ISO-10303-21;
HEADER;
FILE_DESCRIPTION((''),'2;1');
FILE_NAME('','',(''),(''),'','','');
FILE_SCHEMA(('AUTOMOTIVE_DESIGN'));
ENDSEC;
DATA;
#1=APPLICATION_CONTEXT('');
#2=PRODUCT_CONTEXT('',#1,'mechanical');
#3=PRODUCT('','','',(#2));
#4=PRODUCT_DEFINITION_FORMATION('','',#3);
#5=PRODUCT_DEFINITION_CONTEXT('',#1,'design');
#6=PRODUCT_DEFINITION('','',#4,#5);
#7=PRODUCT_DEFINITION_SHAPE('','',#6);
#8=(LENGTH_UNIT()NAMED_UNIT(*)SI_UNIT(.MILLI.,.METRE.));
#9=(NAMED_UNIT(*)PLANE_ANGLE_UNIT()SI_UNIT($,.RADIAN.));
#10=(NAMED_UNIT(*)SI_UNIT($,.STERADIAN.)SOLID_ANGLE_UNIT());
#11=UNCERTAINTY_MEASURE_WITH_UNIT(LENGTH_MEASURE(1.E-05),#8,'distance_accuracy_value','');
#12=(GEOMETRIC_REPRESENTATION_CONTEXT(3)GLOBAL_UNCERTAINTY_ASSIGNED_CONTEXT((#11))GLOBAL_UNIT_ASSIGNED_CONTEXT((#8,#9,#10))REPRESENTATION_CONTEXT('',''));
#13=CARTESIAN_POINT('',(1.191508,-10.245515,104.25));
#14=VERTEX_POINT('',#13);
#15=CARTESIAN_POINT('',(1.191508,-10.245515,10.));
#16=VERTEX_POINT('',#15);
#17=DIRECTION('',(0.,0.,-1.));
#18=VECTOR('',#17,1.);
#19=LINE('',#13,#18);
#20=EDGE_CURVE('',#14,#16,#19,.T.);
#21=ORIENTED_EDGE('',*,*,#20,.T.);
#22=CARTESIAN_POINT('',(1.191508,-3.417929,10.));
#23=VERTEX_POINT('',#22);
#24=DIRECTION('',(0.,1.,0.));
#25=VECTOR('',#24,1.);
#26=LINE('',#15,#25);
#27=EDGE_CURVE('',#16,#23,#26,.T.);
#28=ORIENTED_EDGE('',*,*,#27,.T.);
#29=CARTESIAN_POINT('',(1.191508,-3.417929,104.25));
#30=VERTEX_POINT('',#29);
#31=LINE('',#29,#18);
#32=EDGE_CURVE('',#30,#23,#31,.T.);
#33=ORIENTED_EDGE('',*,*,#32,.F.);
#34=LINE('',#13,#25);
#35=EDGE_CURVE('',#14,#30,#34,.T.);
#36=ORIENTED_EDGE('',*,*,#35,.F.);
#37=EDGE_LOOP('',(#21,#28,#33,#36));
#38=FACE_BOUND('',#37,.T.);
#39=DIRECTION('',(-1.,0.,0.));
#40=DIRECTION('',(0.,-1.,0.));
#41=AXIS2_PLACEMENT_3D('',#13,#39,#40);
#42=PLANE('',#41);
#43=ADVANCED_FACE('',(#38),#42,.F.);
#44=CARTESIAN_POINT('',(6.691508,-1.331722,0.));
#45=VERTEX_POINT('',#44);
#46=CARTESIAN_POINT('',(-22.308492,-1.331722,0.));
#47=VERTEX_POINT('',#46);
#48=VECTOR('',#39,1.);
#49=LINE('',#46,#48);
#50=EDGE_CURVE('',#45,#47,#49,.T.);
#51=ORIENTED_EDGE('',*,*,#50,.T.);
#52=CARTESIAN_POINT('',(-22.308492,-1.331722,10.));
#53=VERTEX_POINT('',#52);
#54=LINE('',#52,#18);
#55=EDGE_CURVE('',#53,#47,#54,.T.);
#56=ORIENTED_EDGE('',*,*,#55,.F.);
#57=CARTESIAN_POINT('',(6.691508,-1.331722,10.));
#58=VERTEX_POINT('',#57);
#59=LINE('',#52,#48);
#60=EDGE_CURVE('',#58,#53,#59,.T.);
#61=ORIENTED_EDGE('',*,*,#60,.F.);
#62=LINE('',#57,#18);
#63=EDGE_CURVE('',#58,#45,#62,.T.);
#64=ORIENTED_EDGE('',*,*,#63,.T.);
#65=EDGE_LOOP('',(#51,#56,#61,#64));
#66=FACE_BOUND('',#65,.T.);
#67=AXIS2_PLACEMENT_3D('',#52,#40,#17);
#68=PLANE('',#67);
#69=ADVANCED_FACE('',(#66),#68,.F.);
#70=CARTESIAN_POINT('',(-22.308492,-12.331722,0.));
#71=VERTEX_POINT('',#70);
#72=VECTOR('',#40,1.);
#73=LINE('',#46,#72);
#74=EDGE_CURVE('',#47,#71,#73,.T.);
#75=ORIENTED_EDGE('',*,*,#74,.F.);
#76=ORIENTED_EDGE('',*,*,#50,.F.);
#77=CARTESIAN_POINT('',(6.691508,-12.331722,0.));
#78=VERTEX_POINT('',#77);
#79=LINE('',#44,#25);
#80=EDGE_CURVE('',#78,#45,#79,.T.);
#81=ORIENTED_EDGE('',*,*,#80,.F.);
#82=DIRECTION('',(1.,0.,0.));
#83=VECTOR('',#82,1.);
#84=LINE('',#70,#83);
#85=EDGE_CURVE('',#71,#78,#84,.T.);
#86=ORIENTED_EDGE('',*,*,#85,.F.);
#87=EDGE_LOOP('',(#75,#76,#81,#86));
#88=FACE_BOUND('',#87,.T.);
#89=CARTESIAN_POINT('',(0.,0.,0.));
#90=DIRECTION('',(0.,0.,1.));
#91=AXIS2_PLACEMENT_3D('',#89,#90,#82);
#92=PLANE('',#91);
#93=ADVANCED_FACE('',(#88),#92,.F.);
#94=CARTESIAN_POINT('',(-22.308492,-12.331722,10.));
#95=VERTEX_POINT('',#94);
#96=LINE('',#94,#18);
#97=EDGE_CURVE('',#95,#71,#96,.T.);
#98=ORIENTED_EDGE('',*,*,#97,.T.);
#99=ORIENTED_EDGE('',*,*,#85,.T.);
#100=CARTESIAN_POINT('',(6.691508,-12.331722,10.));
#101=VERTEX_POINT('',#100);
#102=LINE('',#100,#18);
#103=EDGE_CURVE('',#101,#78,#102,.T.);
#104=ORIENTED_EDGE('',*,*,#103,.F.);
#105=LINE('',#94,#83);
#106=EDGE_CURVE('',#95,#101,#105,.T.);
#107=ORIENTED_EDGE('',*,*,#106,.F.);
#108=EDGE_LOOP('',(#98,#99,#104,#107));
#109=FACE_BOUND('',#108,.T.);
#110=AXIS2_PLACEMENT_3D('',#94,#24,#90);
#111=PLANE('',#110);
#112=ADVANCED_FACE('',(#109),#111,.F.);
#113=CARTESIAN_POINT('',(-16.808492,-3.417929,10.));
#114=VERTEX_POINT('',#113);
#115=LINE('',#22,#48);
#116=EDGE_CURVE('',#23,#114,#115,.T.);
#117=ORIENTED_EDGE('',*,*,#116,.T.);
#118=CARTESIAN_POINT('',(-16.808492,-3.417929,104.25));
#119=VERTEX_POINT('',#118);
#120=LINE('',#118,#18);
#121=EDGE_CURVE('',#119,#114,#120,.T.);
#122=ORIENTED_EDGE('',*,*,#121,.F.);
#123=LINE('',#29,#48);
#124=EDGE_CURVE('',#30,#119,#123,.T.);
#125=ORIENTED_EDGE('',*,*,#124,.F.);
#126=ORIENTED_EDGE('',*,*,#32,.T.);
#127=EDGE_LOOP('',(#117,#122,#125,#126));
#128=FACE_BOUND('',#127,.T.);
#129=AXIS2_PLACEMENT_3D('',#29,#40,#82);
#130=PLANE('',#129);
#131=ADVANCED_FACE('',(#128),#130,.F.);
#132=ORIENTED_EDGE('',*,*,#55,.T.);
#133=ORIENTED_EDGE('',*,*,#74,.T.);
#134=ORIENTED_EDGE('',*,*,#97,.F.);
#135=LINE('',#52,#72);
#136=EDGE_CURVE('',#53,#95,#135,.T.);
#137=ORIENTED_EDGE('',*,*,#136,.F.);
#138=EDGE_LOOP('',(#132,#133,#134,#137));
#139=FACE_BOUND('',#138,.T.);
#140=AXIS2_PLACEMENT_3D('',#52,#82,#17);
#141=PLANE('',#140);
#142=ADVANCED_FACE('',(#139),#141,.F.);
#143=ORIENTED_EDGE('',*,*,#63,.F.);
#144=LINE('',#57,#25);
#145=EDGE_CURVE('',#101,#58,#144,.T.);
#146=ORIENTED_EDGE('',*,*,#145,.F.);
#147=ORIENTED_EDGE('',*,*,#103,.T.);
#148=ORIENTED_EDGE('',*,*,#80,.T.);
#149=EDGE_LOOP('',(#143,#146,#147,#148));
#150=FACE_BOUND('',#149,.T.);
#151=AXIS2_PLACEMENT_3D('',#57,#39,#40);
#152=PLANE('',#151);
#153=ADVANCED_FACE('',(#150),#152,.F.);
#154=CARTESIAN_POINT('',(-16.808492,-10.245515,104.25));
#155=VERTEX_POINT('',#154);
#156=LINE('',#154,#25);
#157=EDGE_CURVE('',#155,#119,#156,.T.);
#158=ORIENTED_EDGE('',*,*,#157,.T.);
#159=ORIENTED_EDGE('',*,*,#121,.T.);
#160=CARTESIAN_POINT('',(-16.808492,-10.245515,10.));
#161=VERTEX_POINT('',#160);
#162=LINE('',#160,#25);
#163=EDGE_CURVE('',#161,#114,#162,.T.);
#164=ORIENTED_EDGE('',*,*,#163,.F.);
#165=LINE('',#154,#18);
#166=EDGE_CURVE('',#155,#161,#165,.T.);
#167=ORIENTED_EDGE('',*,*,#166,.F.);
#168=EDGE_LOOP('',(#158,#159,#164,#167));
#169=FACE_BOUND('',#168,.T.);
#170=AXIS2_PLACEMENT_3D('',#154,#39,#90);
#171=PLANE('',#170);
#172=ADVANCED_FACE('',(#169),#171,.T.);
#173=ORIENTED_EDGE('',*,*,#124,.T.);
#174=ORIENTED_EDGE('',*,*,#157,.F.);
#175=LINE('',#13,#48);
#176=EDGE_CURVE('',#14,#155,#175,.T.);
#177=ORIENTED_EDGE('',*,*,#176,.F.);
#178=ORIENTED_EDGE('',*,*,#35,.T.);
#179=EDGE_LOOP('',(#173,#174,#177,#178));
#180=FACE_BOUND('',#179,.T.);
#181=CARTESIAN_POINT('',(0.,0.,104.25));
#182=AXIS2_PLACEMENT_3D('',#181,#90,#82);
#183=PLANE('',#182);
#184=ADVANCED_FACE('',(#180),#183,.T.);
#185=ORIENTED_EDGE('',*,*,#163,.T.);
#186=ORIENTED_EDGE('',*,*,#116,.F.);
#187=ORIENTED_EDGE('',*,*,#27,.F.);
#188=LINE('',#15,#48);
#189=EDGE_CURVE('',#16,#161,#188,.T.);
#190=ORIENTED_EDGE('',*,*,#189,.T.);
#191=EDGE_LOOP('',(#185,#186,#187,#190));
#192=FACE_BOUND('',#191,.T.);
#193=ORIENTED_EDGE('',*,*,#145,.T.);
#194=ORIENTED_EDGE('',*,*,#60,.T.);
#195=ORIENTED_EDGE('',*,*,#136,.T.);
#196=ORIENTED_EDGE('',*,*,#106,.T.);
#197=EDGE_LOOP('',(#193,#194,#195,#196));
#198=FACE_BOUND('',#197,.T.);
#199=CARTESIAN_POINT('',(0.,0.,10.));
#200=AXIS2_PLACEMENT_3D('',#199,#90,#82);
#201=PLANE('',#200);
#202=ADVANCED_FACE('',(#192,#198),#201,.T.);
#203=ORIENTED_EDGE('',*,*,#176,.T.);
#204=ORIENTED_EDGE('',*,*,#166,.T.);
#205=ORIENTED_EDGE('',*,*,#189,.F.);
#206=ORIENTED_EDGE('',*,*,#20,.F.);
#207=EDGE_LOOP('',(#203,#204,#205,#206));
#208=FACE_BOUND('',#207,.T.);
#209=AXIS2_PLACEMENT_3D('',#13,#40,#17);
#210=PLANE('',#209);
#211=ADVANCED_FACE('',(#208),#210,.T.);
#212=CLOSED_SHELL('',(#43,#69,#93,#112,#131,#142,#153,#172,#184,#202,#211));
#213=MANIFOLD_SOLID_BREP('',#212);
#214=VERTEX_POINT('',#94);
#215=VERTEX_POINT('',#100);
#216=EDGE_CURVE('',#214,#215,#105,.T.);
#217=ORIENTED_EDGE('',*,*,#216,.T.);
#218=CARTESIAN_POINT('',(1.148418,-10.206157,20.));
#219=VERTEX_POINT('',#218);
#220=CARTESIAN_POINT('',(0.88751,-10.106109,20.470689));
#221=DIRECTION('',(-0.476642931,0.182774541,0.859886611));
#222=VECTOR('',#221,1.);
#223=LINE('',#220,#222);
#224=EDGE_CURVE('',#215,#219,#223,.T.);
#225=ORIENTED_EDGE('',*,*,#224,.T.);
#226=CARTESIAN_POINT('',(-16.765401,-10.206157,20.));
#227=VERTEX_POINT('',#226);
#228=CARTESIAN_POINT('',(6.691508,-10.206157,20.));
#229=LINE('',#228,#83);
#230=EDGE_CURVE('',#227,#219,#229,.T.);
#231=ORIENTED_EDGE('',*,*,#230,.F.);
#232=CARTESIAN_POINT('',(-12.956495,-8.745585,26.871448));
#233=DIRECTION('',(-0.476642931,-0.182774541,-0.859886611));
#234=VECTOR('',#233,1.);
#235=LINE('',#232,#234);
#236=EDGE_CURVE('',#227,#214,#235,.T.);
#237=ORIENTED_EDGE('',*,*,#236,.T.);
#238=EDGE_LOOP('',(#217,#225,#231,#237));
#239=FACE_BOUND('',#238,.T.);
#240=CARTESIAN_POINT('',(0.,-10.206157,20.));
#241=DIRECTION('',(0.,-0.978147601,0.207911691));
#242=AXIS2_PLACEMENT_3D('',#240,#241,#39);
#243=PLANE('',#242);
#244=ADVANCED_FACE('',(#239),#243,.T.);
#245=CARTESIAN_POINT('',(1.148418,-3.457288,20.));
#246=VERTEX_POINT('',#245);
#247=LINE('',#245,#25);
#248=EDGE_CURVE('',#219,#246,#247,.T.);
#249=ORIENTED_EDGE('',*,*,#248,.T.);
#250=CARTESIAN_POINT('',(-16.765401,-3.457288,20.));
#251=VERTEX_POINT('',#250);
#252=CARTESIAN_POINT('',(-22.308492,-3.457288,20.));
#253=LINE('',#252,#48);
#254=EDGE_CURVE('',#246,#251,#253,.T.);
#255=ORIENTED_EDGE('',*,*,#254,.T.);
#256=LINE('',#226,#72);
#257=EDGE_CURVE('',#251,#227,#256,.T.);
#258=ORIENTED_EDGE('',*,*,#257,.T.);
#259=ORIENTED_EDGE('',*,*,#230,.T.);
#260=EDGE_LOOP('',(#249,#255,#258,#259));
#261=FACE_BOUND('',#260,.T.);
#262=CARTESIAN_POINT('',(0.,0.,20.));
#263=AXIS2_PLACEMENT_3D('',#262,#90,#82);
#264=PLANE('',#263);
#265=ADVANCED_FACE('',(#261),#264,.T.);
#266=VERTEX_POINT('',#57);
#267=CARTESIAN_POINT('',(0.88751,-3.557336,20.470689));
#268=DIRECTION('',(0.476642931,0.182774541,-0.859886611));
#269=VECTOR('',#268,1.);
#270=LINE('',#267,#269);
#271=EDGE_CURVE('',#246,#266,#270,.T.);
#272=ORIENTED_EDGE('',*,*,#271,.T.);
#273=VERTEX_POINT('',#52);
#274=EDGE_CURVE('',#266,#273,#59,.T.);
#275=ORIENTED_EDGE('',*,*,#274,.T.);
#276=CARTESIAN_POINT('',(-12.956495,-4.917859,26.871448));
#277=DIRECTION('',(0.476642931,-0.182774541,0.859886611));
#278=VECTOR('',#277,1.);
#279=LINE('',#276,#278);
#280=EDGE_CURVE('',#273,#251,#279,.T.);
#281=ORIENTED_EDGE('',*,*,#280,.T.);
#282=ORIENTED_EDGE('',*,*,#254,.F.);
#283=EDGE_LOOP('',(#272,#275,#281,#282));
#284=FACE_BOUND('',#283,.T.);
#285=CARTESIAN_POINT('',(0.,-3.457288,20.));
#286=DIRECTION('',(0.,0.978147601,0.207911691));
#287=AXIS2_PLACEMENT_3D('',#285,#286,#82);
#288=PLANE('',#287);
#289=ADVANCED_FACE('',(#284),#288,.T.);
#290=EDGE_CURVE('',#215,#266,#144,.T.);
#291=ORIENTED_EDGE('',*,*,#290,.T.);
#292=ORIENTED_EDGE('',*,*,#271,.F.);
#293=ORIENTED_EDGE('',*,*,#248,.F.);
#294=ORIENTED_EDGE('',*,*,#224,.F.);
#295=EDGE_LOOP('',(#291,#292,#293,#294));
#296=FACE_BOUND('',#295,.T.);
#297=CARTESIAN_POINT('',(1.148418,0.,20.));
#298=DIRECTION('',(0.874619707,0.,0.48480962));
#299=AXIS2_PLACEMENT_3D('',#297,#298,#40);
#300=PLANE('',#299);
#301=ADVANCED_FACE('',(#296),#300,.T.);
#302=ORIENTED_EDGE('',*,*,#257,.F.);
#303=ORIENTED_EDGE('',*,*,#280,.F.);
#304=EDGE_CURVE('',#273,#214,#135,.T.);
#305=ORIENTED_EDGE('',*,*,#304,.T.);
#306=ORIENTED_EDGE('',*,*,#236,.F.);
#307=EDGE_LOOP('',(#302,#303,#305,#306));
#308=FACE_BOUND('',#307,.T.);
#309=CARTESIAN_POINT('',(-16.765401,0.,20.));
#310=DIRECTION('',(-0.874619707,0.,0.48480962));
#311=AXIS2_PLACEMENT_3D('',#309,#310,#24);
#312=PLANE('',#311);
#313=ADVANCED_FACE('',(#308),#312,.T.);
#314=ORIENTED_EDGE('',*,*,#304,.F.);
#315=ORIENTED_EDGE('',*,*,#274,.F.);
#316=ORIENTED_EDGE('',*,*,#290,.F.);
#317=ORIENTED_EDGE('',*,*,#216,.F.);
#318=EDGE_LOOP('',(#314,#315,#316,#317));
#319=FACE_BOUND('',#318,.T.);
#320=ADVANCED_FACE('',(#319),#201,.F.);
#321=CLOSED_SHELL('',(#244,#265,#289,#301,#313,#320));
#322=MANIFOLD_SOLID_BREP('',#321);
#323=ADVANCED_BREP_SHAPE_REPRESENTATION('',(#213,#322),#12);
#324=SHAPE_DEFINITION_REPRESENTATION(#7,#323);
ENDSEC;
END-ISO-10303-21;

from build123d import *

# Parameters (mm, degrees)
CROQUIS1_W              = 29
CROQUIS1_H              = 11
SALIENTE_EXTRUIR1_DEPTH = 10
CROQUIS2_W              = 18
CROQUIS2_H              = 6.827586207
SALIENTE_EXTRUIR2_DEPTH = 94.25
CROQUIS3_W              = 29
CROQUIS3_H              = 11
SALIENTE_EXTRUIR5_DEPTH = 10
CHAFL_N1_SIZE           = 10
CHAFL_N1_SIZE_2         = 2.125565617
CHAFL_N2_SIZE           = 10
CHAFL_N2_SIZE_2         = 2.125565617
CHAFL_N6_SIZE2          = 5.543090515
CHAFL_N6_SIZE           = 10
CHAFL_N7_SIZE           = 5.543090515
CHAFL_N7_SIZE_2         = 10


# Some blends are built 0.0001 mm under size
with BuildPart() as part:
    # Croquis1 → Saliente-Extruir1 (new body)
    with BuildSketch(Plane.XY):
        with Locations((-7.808491758, -6.83172232)):
            Rectangle(CROQUIS1_W, CROQUIS1_H)
    extrude(amount=SALIENTE_EXTRUIR1_DEPTH)

    # Croquis2 → Saliente-Extruir2 (add)
    with BuildSketch(Plane.XY.offset(10)):
        with Locations((-7.808491758, -6.83172232)):
            Rectangle(CROQUIS2_W, CROQUIS2_H)
    extrude(amount=SALIENTE_EXTRUIR2_DEPTH)


with BuildPart() as body_2:
    # Croquis3 → Saliente-Extruir5 (new body)
    with BuildSketch(Plane.XY.offset(10)):
        with Locations((-7.808491758, -6.83172232)):
            Rectangle(CROQUIS3_W, CROQUIS3_H)
    extrude(amount=SALIENTE_EXTRUIR5_DEPTH)

    # Chaflán1
    # the kernel refuses this chamfer: 10, 2.125565617 mm, written as the material it takes off along each edge
    with BuildSketch(Plane(origin=(32.670487822, -12.33172232, 20), x_dir=(0, -0.008003073799517237, -0.999967974892076), z_dir=(-1, 0, 0))) as chafl_n1_piece_1:
        Polygon((CHAFL_N1_SIZE * 0.999967974892, -CHAFL_N1_SIZE * 0.00800307379952), (-CHAFL_N1_SIZE_2 * 0.00800307379839, -CHAFL_N1_SIZE_2 * 0.999967974751), (0, 0), align=None)
    extrude(amount=80.957959161, mode=Mode.SUBTRACT)

    # Chaflán2
    # the kernel refuses this chamfer: 10, 2.125565617 mm, written as the material it takes off along each edge
    with BuildSketch(Plane(origin=(-48.287471339, -1.33172232, 20), x_dir=(0, 0.008003073799517172, -0.999967974892076), z_dir=(1, 0, 0))) as chafl_n2_piece_1:
        Polygon((CHAFL_N2_SIZE * 0.999967974892, -CHAFL_N2_SIZE * 0.00800307379952), (-CHAFL_N2_SIZE_2 * 0.00800307379839, -CHAFL_N2_SIZE_2 * 0.999967974751), (0, 0), align=None)
    extrude(amount=80.957959161, mode=Mode.SUBTRACT)

    # Chaflán6
    chafl_n6_edges = [body_2.edges().sort_by_distance(p)[0] for p in [
        (6.691508242, -6.83172232, 20),
    ]]
    chafl_n6_side = [body_2.faces().sort_by_distance(p)[0] for p in [
        (6.691508242, -6.83172232, 19.88913819),
    ]]
    chamfer(chafl_n6_edges, length=CHAFL_N6_SIZE - 0.0001, length2=CHAFL_N6_SIZE2 - 0.0001, reference=chafl_n6_side[0])  # a hair under: the kernel refuses the full size

    # Chaflán7
    # the kernel refuses this chamfer: 10, 5.543090515 mm, written as the material it takes off along each edge
    with BuildSketch(Plane(origin=(-22.308491758, -36.085317921, 20), x_dir=(0.9981458389905736, 0, 0.06086775916528887), z_dir=(0, 1, 0))) as chafl_n7_piece_1:
        Polygon((CHAFL_N7_SIZE * 0.998145838906, CHAFL_N7_SIZE * 0.0608677591601), (-CHAFL_N7_SIZE_2 * 0.0608677591653, CHAFL_N7_SIZE_2 * 0.998145838991), (0, 0), align=None)
    extrude(amount=58.507191203, mode=Mode.SUBTRACT)


solid = Compound([part.part, body_2.part])
